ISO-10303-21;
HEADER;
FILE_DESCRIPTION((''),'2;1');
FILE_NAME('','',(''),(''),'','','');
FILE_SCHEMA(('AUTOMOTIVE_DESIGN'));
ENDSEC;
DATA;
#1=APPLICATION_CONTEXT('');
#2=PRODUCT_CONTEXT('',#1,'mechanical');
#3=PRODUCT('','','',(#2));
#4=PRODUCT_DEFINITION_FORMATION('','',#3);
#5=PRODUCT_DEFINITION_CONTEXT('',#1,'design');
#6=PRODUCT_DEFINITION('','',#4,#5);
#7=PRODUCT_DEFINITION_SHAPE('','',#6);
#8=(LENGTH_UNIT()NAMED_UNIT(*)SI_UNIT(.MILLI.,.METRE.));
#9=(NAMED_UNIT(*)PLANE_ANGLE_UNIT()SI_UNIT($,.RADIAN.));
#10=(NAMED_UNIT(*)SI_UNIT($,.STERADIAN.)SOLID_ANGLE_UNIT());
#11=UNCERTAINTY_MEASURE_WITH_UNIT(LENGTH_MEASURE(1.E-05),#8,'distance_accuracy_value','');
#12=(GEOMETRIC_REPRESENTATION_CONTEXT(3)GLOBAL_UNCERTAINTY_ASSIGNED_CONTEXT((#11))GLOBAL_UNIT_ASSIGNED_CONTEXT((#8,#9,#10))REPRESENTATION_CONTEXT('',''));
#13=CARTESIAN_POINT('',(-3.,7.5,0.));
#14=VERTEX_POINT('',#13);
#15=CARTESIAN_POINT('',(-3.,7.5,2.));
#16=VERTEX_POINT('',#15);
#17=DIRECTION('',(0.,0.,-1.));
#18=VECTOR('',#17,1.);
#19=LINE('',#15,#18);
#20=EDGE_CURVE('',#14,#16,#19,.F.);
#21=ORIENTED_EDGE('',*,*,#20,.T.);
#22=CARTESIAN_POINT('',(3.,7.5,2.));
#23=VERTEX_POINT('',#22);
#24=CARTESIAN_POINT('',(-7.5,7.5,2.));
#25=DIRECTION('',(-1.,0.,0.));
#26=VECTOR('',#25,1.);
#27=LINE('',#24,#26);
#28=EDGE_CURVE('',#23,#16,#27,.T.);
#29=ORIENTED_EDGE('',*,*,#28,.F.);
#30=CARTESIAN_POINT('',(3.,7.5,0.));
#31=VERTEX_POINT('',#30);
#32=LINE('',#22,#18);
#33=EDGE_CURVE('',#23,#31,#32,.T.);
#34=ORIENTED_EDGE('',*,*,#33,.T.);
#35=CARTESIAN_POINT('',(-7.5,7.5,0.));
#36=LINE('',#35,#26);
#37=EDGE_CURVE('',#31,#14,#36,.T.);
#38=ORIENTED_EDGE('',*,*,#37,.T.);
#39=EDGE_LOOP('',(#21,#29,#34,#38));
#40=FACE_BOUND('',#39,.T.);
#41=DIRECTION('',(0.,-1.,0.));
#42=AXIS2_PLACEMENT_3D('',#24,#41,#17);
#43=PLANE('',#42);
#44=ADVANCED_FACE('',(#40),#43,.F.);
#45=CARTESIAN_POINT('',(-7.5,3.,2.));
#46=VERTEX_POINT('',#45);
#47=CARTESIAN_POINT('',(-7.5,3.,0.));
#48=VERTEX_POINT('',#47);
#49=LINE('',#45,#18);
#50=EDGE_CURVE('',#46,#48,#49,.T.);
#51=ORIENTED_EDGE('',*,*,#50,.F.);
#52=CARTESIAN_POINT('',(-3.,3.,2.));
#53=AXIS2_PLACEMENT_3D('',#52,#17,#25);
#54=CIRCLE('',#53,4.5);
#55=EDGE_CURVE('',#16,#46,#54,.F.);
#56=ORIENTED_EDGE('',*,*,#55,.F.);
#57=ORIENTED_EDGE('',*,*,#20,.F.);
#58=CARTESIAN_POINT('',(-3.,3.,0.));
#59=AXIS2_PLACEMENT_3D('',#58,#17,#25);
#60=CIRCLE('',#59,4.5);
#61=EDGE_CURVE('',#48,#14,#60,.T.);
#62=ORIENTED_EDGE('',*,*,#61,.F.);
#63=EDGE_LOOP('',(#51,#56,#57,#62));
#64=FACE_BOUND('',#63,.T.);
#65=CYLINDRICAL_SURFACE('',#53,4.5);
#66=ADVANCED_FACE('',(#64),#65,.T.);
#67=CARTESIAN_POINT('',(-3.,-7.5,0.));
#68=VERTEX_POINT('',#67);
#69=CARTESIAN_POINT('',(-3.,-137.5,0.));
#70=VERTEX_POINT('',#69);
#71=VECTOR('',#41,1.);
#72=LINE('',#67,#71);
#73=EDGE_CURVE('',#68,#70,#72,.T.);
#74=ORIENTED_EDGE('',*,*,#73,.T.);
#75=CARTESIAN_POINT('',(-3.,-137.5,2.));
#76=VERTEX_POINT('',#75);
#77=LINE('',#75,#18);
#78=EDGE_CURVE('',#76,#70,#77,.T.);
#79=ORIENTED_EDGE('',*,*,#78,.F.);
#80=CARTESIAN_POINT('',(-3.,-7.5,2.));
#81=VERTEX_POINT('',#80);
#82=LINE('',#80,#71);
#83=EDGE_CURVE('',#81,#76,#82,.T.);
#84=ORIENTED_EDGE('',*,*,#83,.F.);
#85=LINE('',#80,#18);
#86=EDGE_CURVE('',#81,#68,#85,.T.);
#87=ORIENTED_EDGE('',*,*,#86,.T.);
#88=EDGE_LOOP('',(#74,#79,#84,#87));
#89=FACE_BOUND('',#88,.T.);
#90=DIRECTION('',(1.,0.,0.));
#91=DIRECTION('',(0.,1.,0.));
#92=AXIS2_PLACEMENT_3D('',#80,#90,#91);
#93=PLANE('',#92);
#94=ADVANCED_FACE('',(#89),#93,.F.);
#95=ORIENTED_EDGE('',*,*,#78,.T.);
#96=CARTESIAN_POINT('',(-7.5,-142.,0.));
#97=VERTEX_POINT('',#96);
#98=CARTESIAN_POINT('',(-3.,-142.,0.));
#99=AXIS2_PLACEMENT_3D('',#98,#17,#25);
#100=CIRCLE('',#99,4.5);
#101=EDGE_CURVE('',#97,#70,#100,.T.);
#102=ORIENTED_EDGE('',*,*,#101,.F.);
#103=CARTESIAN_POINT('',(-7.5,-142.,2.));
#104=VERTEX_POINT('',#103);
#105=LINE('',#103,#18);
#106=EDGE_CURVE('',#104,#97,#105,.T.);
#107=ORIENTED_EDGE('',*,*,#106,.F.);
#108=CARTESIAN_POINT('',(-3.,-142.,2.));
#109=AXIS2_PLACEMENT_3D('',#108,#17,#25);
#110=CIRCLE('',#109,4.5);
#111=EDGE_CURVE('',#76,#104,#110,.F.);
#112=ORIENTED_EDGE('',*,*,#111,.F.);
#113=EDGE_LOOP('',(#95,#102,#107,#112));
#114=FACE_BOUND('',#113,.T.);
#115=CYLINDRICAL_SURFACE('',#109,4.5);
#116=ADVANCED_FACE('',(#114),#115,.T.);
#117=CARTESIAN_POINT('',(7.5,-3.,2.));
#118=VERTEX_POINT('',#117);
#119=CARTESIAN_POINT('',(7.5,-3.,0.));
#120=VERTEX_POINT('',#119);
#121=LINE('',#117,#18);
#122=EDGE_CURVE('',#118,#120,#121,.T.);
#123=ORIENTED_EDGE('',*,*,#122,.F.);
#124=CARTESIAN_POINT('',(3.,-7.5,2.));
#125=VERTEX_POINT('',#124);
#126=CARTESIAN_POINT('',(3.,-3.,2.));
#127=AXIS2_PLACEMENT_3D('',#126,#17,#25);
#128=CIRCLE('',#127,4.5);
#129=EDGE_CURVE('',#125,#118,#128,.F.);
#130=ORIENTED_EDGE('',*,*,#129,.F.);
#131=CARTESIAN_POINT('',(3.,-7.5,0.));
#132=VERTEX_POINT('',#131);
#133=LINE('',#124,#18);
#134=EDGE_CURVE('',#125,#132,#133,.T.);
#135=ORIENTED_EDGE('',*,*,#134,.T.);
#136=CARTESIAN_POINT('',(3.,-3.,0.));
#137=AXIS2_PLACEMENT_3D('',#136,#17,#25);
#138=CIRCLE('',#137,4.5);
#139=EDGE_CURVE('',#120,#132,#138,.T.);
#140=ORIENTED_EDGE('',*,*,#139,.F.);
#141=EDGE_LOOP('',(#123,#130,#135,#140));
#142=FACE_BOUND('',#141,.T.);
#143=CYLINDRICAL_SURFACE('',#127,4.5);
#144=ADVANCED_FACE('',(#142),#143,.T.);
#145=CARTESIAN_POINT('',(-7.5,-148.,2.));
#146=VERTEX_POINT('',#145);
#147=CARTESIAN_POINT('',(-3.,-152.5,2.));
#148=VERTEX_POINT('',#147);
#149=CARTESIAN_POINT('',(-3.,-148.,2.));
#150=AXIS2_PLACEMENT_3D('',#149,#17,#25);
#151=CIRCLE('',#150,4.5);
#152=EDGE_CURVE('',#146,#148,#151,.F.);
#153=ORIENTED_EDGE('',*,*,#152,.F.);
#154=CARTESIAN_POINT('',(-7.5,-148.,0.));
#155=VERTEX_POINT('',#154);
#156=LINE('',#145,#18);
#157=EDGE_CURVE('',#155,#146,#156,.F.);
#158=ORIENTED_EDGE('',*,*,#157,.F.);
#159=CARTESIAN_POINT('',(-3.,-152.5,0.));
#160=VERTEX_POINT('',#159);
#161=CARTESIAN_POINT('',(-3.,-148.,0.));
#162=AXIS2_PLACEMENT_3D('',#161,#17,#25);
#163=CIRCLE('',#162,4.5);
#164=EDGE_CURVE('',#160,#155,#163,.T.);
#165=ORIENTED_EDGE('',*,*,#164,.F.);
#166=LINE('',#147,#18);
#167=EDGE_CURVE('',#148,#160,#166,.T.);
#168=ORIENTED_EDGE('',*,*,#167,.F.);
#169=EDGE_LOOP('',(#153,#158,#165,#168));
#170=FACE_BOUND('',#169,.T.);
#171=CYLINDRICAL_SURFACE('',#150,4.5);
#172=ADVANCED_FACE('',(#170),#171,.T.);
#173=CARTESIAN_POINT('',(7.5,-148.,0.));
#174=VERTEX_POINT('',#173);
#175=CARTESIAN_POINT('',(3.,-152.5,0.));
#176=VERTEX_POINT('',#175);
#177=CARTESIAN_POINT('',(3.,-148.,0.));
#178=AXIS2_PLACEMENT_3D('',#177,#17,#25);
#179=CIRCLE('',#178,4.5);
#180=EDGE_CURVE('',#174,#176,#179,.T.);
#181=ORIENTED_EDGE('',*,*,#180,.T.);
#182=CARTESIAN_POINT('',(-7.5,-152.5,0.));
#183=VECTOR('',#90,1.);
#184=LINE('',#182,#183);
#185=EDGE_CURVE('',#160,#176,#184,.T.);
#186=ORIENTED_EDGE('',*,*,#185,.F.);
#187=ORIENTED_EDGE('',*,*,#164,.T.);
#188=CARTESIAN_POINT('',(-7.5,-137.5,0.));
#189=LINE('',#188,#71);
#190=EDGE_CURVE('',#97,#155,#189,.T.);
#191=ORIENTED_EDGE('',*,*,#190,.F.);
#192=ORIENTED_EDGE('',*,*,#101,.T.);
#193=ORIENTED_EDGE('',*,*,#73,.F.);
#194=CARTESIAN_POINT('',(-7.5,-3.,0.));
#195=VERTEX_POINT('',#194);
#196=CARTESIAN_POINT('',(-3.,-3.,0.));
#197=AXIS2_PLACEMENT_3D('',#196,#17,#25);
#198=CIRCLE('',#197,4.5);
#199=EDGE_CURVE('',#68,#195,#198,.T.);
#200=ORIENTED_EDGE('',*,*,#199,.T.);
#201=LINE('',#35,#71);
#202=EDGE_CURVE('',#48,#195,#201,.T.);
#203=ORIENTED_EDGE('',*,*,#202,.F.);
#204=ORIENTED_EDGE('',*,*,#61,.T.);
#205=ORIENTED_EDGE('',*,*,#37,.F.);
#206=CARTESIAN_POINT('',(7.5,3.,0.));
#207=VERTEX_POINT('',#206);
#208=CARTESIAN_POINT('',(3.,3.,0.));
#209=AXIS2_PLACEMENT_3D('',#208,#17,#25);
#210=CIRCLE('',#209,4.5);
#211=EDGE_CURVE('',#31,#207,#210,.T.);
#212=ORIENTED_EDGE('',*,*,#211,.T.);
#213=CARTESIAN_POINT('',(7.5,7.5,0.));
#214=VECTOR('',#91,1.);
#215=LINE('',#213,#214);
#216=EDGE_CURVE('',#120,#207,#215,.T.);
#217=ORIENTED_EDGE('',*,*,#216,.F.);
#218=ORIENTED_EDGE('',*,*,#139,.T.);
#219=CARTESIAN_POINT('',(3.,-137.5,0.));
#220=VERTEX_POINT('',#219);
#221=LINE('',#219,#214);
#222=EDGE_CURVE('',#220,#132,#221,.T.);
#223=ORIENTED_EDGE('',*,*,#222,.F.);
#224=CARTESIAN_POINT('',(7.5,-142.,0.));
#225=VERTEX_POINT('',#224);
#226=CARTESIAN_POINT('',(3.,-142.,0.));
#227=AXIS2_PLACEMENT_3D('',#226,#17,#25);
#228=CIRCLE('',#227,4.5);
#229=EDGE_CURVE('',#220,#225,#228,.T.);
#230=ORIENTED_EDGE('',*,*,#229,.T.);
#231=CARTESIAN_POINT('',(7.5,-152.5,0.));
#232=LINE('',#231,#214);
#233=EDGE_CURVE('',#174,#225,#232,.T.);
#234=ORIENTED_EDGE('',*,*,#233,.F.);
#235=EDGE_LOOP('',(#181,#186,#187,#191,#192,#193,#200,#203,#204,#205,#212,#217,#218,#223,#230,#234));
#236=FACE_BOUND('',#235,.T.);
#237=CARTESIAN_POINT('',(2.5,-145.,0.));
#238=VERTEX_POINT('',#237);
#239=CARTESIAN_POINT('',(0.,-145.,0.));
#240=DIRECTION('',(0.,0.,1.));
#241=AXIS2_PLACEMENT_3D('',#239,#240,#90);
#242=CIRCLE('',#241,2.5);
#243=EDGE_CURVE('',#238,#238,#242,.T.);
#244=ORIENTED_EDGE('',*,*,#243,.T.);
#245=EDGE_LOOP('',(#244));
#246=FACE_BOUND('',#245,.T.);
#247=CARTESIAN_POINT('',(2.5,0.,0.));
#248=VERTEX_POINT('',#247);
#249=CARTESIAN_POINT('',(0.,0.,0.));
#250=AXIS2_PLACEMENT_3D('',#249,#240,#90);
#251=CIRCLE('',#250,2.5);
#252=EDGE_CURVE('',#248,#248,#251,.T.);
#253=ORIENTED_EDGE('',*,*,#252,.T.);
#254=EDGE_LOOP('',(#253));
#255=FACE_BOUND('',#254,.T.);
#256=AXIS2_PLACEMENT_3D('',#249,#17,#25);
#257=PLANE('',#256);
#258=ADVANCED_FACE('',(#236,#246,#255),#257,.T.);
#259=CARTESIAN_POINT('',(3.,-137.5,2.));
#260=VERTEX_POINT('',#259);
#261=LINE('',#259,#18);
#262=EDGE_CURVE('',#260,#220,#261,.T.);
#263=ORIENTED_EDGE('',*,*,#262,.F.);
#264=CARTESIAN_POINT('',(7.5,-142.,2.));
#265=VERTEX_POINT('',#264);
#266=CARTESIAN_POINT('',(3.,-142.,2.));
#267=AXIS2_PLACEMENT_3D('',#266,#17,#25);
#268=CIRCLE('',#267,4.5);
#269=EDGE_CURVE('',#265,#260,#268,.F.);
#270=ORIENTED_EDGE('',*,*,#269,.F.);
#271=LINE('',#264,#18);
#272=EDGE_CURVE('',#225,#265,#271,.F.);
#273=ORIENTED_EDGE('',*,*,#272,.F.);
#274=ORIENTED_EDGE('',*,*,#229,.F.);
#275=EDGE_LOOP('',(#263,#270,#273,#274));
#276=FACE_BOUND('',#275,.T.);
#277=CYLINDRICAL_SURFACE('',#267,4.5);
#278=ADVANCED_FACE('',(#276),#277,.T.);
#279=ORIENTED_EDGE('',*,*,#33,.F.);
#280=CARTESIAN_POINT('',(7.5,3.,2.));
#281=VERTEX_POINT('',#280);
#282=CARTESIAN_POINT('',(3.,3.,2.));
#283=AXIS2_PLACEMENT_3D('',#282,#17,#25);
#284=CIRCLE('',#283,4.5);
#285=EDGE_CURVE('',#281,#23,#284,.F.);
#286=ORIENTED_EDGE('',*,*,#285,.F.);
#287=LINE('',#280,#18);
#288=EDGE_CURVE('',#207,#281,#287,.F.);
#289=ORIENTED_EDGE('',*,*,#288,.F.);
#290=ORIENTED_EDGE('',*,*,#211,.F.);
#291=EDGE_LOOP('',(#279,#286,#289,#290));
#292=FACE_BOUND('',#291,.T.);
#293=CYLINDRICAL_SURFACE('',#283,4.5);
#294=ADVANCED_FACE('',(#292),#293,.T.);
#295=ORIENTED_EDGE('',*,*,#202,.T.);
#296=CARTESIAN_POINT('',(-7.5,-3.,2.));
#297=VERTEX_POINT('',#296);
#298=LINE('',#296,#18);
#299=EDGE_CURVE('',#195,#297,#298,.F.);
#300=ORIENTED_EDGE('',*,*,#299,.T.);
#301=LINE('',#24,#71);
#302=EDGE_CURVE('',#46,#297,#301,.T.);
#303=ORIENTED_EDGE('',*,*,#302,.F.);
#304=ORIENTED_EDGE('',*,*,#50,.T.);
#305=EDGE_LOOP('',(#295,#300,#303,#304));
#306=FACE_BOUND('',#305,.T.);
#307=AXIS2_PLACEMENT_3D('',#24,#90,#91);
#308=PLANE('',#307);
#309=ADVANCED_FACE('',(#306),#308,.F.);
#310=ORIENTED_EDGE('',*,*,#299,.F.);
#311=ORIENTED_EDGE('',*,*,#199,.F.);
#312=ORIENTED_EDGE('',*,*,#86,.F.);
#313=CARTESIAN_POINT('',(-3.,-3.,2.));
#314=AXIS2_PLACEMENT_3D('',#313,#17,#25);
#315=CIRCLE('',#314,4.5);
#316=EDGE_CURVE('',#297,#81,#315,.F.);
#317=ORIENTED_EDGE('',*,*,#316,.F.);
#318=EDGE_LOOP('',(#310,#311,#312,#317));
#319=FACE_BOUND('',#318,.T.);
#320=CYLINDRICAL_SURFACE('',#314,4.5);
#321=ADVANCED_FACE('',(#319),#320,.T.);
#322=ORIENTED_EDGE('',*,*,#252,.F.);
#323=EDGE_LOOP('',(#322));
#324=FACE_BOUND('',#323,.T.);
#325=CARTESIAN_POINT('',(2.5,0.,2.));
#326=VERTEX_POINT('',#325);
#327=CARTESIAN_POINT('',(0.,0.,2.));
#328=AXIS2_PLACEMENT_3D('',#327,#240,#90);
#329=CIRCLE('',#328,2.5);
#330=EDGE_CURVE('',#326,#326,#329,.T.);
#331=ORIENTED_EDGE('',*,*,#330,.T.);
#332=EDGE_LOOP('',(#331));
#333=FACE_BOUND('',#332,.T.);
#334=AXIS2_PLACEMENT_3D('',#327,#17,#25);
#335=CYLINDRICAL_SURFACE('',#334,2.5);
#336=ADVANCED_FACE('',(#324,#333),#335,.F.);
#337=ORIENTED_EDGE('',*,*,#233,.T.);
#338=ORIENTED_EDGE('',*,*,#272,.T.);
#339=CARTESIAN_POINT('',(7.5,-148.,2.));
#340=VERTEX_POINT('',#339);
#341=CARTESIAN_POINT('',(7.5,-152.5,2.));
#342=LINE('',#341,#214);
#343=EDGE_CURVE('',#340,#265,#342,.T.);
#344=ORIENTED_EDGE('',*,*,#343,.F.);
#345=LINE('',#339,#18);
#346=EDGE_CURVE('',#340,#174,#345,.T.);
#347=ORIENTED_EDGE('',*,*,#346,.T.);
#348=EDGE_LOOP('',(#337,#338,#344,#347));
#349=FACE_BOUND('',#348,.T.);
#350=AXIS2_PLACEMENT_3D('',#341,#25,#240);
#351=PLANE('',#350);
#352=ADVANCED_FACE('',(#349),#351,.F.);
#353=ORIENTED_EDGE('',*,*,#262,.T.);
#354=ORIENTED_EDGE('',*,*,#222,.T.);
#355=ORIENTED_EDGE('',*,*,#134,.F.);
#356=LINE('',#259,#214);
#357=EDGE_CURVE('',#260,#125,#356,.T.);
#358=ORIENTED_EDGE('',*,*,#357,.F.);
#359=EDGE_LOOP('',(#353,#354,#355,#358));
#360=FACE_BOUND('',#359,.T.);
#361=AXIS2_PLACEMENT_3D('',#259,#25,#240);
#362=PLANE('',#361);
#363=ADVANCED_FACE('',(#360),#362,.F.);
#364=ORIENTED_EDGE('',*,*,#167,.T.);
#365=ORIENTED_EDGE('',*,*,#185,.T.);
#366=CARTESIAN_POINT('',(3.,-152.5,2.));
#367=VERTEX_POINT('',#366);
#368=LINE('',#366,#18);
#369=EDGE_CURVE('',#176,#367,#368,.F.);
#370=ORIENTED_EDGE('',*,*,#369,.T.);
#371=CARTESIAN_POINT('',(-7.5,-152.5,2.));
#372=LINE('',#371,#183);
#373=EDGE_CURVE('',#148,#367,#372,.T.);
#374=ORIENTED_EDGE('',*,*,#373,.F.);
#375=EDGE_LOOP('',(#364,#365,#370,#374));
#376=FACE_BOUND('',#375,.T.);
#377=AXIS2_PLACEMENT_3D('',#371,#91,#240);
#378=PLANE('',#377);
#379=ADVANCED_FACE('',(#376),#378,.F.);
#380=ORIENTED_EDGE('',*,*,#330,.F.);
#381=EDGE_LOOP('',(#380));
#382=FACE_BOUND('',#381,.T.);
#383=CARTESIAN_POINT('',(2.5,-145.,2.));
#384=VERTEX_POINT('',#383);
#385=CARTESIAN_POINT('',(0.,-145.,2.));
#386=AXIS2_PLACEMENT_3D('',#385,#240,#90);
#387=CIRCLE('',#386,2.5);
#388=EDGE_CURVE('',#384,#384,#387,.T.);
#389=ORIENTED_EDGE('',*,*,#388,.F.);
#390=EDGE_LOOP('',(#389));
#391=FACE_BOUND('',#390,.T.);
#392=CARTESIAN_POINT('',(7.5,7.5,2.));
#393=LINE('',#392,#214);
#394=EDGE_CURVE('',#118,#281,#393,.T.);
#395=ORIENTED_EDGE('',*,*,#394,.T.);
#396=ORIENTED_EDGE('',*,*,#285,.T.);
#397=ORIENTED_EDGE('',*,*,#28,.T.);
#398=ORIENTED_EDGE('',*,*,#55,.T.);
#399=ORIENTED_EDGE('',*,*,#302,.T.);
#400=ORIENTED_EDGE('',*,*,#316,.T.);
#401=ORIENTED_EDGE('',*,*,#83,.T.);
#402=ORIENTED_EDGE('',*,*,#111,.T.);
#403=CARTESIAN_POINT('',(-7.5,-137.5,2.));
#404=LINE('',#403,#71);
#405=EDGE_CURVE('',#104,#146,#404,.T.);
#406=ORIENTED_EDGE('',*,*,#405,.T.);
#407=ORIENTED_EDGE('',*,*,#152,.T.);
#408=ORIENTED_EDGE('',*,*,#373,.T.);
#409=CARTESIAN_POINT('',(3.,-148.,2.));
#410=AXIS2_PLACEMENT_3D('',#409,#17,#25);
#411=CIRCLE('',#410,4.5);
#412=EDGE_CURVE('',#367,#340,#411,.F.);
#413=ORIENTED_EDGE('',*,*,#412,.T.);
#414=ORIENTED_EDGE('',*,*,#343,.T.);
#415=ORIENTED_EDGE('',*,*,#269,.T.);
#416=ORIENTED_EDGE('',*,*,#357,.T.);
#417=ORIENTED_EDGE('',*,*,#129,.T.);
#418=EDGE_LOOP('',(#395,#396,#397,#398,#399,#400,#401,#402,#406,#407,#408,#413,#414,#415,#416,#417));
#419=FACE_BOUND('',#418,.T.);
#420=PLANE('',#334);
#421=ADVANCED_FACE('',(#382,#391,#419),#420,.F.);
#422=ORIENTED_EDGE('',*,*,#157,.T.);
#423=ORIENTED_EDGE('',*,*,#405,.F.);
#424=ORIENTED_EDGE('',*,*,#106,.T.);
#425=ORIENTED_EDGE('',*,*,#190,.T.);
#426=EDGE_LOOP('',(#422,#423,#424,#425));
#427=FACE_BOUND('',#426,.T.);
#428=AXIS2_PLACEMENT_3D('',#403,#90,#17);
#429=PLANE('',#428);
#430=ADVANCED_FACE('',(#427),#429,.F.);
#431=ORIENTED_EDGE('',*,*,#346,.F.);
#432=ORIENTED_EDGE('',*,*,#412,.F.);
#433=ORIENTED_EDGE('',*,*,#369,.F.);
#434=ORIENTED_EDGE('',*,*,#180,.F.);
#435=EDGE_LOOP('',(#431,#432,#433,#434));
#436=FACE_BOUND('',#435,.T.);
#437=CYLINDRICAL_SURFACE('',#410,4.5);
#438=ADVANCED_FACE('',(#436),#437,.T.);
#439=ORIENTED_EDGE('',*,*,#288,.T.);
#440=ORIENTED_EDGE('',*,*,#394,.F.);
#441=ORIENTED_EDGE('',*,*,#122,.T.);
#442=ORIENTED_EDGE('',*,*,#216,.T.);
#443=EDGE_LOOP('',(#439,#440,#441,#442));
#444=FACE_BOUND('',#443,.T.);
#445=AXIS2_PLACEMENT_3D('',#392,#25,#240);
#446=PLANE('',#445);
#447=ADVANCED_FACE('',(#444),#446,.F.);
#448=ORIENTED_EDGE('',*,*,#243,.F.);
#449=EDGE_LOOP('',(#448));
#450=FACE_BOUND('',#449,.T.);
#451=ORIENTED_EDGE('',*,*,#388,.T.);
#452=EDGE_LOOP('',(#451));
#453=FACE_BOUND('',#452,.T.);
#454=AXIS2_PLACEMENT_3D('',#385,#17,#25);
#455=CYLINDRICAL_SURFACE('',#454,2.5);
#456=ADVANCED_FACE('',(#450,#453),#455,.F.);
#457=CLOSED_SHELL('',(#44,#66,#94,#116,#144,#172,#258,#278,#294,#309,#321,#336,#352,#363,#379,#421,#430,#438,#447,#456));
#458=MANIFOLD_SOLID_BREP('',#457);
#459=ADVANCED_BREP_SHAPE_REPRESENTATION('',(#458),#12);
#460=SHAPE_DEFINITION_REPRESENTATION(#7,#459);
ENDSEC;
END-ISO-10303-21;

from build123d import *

# Parameters (mm, degrees)
SKETCH_1_R      = 2.5
EXTRUDE_1_DEPTH = 2
FILLET_1_R      = 4.5


with BuildPart() as part:
    # 草图1 → 凸台-拉伸1 (new body)
    with BuildSketch(Plane.XY):
        Polygon((-7.5, 7.5), (-7.5, -7.5), (-3, -7.5), (-3, -137.5), (-7.5, -137.5), (-7.5, -152.5), (7.5, -152.5), (7.5, -137.5), (3, -137.5), (3, -7.5), (7.5, -7.5), (7.5, 7.5), align=None)
        Circle(SKETCH_1_R, mode=Mode.SUBTRACT)
        with Locations((0, -145)):
            Circle(SKETCH_1_R, mode=Mode.SUBTRACT)
    extrude(amount=EXTRUDE_1_DEPTH)

    # 圆角1
    fillet_1_edges = [part.edges().sort_by_distance(p)[0] for p in [
        (-7.5, 7.5, 1),
        (-7.5, -7.5, 1),
        (7.5, -7.5, 1),
        (7.5, 7.5, 1),
        (7.5, -152.5, 1),
        (7.5, -137.5, 1),
        (-7.5, -152.5, 1),
        (-7.5, -137.5, 1),
    ]]
    fillet(fillet_1_edges, radius=FILLET_1_R - 0.0001)  # a hair under: the kernel refuses the full size


solid = part.part
